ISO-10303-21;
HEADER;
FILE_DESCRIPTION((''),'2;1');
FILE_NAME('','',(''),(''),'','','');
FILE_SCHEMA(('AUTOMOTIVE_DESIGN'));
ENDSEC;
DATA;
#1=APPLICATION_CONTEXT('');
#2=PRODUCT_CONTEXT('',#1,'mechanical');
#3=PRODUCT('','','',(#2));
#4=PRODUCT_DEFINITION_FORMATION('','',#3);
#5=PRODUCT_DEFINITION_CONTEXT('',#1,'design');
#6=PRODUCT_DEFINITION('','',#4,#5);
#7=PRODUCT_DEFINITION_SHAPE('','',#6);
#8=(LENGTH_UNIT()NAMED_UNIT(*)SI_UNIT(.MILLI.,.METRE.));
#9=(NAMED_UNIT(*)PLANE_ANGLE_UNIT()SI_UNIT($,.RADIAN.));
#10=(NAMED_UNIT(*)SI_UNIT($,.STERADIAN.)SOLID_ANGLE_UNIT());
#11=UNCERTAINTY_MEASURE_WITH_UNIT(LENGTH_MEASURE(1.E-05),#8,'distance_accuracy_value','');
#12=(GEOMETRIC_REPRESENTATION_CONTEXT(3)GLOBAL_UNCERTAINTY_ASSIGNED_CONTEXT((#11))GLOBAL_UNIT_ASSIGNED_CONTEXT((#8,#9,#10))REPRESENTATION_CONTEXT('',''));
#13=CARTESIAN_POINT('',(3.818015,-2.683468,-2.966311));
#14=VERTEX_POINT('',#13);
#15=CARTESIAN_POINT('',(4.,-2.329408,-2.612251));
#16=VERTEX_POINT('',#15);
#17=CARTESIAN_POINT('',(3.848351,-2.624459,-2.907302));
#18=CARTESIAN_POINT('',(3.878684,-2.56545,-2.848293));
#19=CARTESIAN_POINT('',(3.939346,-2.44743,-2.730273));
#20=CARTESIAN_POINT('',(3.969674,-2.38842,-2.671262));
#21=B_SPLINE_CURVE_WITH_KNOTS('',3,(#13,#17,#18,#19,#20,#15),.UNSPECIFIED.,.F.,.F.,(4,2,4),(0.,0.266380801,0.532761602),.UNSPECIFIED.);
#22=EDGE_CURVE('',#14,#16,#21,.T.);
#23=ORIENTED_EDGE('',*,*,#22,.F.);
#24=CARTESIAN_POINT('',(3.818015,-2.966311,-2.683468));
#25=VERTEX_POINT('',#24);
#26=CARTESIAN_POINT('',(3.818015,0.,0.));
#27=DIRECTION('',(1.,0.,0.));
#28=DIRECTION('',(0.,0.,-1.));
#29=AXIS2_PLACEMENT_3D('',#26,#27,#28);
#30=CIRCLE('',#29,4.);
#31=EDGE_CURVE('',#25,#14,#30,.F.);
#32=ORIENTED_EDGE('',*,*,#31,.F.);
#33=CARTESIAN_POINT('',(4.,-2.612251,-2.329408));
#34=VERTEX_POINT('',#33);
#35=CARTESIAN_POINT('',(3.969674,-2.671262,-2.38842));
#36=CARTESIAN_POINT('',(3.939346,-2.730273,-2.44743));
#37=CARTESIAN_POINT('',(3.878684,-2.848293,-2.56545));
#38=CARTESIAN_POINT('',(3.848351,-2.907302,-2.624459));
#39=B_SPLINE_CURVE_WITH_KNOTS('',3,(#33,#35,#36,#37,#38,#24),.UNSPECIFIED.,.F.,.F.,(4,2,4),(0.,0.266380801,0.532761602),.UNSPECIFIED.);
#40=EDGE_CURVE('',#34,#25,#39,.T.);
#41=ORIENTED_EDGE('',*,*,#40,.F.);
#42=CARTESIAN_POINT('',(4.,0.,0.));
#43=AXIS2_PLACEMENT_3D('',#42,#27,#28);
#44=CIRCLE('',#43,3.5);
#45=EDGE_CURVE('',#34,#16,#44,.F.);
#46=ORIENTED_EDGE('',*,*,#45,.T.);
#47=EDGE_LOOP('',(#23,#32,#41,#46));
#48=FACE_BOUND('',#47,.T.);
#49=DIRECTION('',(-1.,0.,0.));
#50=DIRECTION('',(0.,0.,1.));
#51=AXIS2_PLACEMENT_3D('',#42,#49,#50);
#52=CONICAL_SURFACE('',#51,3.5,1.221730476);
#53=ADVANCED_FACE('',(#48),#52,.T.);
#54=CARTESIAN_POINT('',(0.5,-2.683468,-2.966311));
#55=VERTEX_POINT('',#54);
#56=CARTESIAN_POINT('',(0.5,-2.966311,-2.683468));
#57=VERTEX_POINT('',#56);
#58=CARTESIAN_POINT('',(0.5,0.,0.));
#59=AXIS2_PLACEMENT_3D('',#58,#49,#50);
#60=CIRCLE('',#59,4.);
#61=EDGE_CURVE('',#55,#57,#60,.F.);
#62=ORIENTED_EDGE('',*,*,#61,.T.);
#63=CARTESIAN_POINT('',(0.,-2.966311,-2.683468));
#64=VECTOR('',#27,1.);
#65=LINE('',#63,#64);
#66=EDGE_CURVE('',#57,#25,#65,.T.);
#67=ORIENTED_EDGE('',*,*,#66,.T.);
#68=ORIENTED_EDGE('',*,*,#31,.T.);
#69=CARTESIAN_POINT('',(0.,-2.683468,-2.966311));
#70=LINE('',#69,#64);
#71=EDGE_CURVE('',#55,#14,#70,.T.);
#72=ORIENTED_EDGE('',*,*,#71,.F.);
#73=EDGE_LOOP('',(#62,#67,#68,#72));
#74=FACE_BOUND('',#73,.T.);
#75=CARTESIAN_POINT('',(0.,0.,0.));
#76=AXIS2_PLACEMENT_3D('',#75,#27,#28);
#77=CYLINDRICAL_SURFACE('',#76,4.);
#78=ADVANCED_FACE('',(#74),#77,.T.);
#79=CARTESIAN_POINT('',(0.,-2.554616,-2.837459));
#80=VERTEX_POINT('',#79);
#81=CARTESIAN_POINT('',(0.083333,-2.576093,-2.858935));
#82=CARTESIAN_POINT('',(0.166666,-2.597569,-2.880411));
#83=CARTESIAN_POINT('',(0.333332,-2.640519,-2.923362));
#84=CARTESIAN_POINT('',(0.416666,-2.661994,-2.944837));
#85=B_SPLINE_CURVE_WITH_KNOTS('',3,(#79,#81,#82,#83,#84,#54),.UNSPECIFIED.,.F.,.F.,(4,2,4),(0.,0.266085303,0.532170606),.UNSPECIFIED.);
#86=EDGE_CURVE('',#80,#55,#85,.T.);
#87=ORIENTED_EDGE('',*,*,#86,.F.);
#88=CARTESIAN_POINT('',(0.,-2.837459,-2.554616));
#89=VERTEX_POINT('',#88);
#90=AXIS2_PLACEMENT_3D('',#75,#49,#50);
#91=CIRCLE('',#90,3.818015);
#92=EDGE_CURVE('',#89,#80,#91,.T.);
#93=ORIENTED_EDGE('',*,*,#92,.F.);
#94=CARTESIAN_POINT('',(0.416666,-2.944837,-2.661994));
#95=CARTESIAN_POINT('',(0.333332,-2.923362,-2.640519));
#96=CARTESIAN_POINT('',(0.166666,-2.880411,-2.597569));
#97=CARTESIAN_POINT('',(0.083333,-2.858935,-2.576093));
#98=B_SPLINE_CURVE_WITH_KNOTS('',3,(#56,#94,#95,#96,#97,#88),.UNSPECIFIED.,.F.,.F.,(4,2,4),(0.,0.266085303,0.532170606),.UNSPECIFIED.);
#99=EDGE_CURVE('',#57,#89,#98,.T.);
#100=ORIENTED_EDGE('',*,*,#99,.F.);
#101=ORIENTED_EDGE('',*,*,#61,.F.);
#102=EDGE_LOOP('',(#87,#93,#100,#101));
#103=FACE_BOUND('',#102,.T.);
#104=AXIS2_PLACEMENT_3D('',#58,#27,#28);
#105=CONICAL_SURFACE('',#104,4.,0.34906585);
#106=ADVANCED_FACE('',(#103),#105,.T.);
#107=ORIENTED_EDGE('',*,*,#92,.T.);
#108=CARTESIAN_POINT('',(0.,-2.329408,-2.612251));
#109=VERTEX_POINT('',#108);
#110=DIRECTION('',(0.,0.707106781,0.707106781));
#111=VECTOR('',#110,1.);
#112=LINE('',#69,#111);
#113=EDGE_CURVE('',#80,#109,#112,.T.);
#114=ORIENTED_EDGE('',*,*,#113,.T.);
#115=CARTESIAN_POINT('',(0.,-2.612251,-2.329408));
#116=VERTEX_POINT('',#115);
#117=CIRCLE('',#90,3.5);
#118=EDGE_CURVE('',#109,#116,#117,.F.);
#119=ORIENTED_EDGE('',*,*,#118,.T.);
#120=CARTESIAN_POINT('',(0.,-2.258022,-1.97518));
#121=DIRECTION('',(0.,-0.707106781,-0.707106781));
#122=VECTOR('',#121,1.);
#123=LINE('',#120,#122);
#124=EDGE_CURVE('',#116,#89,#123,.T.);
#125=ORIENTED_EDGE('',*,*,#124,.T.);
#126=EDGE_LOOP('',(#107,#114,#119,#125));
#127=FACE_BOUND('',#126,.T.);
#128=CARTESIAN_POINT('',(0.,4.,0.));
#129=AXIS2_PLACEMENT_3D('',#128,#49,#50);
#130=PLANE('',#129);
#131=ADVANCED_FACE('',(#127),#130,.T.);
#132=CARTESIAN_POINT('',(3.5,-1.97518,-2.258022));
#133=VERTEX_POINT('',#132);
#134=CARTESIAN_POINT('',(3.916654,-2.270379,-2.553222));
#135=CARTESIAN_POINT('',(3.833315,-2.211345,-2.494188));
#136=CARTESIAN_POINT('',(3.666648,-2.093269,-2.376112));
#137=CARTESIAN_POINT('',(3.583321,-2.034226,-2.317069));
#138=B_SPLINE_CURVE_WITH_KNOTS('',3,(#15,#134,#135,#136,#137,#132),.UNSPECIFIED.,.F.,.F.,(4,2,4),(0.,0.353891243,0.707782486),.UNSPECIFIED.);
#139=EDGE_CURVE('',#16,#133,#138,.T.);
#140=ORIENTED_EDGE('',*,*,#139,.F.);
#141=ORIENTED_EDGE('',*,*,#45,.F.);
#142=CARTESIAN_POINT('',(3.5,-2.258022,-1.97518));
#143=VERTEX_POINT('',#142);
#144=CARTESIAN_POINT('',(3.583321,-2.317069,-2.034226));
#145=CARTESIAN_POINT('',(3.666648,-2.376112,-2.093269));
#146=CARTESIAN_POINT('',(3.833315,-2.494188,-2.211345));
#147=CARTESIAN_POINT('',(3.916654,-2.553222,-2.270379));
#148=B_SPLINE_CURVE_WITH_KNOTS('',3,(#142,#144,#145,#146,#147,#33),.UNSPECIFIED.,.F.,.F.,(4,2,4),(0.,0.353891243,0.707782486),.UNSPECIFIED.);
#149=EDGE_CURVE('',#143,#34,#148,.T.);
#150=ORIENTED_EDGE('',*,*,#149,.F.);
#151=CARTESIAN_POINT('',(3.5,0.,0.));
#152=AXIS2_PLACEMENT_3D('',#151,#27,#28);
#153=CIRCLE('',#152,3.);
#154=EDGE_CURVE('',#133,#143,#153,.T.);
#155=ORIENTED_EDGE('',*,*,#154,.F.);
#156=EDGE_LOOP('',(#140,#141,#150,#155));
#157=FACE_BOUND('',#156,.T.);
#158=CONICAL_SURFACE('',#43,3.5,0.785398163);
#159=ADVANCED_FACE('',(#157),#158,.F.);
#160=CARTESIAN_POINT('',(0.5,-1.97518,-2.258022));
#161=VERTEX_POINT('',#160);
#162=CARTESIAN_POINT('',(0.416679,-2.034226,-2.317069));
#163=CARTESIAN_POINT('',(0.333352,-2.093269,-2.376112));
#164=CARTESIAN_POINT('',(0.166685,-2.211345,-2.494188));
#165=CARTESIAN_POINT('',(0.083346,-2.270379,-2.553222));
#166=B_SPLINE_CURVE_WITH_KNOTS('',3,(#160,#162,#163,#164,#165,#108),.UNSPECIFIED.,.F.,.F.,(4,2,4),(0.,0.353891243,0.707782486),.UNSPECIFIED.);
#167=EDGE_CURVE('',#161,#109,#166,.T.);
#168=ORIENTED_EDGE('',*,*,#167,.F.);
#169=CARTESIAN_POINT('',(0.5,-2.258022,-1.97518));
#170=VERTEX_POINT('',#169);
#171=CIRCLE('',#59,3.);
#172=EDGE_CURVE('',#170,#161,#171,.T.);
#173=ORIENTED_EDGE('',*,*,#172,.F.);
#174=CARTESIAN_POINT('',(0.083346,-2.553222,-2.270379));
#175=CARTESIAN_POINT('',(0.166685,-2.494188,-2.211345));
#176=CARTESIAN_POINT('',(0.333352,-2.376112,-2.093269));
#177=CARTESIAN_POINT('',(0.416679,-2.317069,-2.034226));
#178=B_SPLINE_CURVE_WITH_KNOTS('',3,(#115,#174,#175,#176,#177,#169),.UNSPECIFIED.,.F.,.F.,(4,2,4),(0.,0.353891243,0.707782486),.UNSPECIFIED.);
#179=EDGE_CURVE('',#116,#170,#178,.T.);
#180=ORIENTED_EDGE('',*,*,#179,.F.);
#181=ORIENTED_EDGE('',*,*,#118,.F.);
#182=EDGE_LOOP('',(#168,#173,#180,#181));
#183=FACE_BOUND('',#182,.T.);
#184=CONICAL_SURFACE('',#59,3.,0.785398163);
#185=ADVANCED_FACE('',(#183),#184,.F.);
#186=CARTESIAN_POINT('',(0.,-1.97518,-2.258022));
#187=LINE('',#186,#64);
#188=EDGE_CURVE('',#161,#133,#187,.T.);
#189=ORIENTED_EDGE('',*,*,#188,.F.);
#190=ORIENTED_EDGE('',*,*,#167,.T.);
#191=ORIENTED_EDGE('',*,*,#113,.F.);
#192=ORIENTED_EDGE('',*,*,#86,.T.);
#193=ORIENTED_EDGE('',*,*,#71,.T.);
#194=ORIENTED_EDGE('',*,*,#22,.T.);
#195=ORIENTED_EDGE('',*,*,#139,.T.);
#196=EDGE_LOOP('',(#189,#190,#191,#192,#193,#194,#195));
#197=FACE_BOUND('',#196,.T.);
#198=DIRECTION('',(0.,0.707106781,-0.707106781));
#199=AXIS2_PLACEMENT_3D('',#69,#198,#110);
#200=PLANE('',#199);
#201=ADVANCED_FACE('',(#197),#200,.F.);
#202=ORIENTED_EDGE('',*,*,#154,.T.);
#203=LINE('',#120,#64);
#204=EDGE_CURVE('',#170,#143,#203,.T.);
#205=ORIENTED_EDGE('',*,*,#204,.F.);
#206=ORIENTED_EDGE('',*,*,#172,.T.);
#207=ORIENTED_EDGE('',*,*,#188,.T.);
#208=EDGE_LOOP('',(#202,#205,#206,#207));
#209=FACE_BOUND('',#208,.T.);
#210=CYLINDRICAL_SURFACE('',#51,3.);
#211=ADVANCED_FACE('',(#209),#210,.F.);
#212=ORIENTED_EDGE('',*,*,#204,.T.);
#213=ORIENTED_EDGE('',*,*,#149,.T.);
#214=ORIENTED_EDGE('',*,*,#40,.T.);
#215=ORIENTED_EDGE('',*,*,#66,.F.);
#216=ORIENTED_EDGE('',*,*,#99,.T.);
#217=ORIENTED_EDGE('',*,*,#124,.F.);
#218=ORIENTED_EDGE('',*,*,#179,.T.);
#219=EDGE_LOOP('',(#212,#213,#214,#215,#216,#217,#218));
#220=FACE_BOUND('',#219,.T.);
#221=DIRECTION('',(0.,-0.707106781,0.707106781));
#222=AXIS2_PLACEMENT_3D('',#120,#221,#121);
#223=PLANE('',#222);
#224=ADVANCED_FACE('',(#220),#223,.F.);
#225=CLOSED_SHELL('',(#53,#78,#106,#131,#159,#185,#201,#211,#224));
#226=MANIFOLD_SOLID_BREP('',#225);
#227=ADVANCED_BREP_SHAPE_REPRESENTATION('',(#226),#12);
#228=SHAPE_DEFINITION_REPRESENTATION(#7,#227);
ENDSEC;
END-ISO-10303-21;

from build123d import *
from OCP.BRepFilletAPI import BRepFilletAPI_MakeChamfer

# Parameters (mm, degrees)
ESQUISSE1_W             = 4
ESQUISSE1_H             = 4
ENL_V_MAT_EXTRU_1_DEPTH = 7.92820323
ESQUISSE3_W             = 4
ESQUISSE3_H             = 3
CHANFREIN1_SIZE         = 0.5
CHANFREIN2_SIZE         = 0.5
CHANFREIN2_SIZE_2       = 0.181985117


with BuildPart() as part:
    # Esquisse1 → Révolution1 (revolve)
    with BuildSketch(Plane.XY, mode=Mode.PRIVATE) as r_volution1_sk:
        with Locations((2, 2)):
            Rectangle(ESQUISSE1_W, ESQUISSE1_H)
    revolve(r_volution1_sk.sketch.rotate(Axis((0, 0, 0), (1, 0, 0)), 270), axis=Axis((0, 0, 0), (1, 0, 0)))

    # Esquisse2 → Enlèv. mat.-Extru.1 (cut, through all)
    with BuildSketch(Plane(origin=(4, 0, 0), x_dir=(0, 0, -1), z_dir=(1, 0, 0))):
        with BuildLine():
            Line((2.966310735, -2.683468022), (2.258022405, -1.975179693))
            ThreePointArc((2.258022405, -1.975179693), (2.121320344, -2.121320344), (1.975179693, -2.258022405))
            Line((1.975179693, -2.258022405), (2.683468022, -2.966310735))
            ThreePointArc((2.683468022, -2.966310735), (2.828427125, -2.828427125), (2.966310735, -2.683468022))
        make_face()
    extrude(amount=-ENL_V_MAT_EXTRU_1_DEPTH, mode=Mode.SUBTRACT)

    # Esquisse3 → Enlèvement de matière-Révolution1 (revolve, cut)
    with BuildSketch(Plane(origin=(0, 0, 0), x_dir=(-1, 0, 0), z_dir=(0, 0, -1))):
        with Locations((-2, 1.5)):
            Rectangle(ESQUISSE3_W, ESQUISSE3_H)
    revolve(axis=Axis((4, 0, 0), (-1, 0, 0)), mode=Mode.SUBTRACT)

    # Chanfrein1
    chanfrein1_edges = [part.edges().sort_by_distance(p)[0] for p in [
        (4, -1.054972224, 2.8083863),
        (0, -1.054972224, 2.8083863),
    ]]
    chamfer(chanfrein1_edges, length=CHANFREIN1_SIZE)

    # Chanfrein2
    chanfrein2_edges_1 = [part.edges().sort_by_distance(p)[0] for p in [
        (4, 2.828427125, 2.828427125),
    ]]
    chanfrein2_side_1 = [part.faces().sort_by_distance(p)[0] for p in [
        (4, 2.825853467, 2.825853467),
    ]]
    chanfrein2_edges_2 = [part.edges().sort_by_distance(p)[0] for p in [
        (0, 2.828427125, 2.828427125),
    ]]
    chanfrein2_side_2 = [part.faces().sort_by_distance(p)[0] for p in [
        (0, 2.825853467, 2.825853467),
    ]]
    chanfrein2 = BRepFilletAPI_MakeChamfer(part.part.solid().wrapped)
    for e in chanfrein2_edges_1:
        chanfrein2.Add(CHANFREIN2_SIZE - 0.0001, CHANFREIN2_SIZE_2 - 0.0001, e.wrapped, chanfrein2_side_1[0].wrapped)
    for e in chanfrein2_edges_2:
        chanfrein2.Add(CHANFREIN2_SIZE_2 - 0.0001, CHANFREIN2_SIZE - 0.0001, e.wrapped, chanfrein2_side_2[0].wrapped)
    add(Compound.cast(chanfrein2.Shape()), mode=Mode.REPLACE)  # a hair under: the kernel refuses the full size


solid = part.part
